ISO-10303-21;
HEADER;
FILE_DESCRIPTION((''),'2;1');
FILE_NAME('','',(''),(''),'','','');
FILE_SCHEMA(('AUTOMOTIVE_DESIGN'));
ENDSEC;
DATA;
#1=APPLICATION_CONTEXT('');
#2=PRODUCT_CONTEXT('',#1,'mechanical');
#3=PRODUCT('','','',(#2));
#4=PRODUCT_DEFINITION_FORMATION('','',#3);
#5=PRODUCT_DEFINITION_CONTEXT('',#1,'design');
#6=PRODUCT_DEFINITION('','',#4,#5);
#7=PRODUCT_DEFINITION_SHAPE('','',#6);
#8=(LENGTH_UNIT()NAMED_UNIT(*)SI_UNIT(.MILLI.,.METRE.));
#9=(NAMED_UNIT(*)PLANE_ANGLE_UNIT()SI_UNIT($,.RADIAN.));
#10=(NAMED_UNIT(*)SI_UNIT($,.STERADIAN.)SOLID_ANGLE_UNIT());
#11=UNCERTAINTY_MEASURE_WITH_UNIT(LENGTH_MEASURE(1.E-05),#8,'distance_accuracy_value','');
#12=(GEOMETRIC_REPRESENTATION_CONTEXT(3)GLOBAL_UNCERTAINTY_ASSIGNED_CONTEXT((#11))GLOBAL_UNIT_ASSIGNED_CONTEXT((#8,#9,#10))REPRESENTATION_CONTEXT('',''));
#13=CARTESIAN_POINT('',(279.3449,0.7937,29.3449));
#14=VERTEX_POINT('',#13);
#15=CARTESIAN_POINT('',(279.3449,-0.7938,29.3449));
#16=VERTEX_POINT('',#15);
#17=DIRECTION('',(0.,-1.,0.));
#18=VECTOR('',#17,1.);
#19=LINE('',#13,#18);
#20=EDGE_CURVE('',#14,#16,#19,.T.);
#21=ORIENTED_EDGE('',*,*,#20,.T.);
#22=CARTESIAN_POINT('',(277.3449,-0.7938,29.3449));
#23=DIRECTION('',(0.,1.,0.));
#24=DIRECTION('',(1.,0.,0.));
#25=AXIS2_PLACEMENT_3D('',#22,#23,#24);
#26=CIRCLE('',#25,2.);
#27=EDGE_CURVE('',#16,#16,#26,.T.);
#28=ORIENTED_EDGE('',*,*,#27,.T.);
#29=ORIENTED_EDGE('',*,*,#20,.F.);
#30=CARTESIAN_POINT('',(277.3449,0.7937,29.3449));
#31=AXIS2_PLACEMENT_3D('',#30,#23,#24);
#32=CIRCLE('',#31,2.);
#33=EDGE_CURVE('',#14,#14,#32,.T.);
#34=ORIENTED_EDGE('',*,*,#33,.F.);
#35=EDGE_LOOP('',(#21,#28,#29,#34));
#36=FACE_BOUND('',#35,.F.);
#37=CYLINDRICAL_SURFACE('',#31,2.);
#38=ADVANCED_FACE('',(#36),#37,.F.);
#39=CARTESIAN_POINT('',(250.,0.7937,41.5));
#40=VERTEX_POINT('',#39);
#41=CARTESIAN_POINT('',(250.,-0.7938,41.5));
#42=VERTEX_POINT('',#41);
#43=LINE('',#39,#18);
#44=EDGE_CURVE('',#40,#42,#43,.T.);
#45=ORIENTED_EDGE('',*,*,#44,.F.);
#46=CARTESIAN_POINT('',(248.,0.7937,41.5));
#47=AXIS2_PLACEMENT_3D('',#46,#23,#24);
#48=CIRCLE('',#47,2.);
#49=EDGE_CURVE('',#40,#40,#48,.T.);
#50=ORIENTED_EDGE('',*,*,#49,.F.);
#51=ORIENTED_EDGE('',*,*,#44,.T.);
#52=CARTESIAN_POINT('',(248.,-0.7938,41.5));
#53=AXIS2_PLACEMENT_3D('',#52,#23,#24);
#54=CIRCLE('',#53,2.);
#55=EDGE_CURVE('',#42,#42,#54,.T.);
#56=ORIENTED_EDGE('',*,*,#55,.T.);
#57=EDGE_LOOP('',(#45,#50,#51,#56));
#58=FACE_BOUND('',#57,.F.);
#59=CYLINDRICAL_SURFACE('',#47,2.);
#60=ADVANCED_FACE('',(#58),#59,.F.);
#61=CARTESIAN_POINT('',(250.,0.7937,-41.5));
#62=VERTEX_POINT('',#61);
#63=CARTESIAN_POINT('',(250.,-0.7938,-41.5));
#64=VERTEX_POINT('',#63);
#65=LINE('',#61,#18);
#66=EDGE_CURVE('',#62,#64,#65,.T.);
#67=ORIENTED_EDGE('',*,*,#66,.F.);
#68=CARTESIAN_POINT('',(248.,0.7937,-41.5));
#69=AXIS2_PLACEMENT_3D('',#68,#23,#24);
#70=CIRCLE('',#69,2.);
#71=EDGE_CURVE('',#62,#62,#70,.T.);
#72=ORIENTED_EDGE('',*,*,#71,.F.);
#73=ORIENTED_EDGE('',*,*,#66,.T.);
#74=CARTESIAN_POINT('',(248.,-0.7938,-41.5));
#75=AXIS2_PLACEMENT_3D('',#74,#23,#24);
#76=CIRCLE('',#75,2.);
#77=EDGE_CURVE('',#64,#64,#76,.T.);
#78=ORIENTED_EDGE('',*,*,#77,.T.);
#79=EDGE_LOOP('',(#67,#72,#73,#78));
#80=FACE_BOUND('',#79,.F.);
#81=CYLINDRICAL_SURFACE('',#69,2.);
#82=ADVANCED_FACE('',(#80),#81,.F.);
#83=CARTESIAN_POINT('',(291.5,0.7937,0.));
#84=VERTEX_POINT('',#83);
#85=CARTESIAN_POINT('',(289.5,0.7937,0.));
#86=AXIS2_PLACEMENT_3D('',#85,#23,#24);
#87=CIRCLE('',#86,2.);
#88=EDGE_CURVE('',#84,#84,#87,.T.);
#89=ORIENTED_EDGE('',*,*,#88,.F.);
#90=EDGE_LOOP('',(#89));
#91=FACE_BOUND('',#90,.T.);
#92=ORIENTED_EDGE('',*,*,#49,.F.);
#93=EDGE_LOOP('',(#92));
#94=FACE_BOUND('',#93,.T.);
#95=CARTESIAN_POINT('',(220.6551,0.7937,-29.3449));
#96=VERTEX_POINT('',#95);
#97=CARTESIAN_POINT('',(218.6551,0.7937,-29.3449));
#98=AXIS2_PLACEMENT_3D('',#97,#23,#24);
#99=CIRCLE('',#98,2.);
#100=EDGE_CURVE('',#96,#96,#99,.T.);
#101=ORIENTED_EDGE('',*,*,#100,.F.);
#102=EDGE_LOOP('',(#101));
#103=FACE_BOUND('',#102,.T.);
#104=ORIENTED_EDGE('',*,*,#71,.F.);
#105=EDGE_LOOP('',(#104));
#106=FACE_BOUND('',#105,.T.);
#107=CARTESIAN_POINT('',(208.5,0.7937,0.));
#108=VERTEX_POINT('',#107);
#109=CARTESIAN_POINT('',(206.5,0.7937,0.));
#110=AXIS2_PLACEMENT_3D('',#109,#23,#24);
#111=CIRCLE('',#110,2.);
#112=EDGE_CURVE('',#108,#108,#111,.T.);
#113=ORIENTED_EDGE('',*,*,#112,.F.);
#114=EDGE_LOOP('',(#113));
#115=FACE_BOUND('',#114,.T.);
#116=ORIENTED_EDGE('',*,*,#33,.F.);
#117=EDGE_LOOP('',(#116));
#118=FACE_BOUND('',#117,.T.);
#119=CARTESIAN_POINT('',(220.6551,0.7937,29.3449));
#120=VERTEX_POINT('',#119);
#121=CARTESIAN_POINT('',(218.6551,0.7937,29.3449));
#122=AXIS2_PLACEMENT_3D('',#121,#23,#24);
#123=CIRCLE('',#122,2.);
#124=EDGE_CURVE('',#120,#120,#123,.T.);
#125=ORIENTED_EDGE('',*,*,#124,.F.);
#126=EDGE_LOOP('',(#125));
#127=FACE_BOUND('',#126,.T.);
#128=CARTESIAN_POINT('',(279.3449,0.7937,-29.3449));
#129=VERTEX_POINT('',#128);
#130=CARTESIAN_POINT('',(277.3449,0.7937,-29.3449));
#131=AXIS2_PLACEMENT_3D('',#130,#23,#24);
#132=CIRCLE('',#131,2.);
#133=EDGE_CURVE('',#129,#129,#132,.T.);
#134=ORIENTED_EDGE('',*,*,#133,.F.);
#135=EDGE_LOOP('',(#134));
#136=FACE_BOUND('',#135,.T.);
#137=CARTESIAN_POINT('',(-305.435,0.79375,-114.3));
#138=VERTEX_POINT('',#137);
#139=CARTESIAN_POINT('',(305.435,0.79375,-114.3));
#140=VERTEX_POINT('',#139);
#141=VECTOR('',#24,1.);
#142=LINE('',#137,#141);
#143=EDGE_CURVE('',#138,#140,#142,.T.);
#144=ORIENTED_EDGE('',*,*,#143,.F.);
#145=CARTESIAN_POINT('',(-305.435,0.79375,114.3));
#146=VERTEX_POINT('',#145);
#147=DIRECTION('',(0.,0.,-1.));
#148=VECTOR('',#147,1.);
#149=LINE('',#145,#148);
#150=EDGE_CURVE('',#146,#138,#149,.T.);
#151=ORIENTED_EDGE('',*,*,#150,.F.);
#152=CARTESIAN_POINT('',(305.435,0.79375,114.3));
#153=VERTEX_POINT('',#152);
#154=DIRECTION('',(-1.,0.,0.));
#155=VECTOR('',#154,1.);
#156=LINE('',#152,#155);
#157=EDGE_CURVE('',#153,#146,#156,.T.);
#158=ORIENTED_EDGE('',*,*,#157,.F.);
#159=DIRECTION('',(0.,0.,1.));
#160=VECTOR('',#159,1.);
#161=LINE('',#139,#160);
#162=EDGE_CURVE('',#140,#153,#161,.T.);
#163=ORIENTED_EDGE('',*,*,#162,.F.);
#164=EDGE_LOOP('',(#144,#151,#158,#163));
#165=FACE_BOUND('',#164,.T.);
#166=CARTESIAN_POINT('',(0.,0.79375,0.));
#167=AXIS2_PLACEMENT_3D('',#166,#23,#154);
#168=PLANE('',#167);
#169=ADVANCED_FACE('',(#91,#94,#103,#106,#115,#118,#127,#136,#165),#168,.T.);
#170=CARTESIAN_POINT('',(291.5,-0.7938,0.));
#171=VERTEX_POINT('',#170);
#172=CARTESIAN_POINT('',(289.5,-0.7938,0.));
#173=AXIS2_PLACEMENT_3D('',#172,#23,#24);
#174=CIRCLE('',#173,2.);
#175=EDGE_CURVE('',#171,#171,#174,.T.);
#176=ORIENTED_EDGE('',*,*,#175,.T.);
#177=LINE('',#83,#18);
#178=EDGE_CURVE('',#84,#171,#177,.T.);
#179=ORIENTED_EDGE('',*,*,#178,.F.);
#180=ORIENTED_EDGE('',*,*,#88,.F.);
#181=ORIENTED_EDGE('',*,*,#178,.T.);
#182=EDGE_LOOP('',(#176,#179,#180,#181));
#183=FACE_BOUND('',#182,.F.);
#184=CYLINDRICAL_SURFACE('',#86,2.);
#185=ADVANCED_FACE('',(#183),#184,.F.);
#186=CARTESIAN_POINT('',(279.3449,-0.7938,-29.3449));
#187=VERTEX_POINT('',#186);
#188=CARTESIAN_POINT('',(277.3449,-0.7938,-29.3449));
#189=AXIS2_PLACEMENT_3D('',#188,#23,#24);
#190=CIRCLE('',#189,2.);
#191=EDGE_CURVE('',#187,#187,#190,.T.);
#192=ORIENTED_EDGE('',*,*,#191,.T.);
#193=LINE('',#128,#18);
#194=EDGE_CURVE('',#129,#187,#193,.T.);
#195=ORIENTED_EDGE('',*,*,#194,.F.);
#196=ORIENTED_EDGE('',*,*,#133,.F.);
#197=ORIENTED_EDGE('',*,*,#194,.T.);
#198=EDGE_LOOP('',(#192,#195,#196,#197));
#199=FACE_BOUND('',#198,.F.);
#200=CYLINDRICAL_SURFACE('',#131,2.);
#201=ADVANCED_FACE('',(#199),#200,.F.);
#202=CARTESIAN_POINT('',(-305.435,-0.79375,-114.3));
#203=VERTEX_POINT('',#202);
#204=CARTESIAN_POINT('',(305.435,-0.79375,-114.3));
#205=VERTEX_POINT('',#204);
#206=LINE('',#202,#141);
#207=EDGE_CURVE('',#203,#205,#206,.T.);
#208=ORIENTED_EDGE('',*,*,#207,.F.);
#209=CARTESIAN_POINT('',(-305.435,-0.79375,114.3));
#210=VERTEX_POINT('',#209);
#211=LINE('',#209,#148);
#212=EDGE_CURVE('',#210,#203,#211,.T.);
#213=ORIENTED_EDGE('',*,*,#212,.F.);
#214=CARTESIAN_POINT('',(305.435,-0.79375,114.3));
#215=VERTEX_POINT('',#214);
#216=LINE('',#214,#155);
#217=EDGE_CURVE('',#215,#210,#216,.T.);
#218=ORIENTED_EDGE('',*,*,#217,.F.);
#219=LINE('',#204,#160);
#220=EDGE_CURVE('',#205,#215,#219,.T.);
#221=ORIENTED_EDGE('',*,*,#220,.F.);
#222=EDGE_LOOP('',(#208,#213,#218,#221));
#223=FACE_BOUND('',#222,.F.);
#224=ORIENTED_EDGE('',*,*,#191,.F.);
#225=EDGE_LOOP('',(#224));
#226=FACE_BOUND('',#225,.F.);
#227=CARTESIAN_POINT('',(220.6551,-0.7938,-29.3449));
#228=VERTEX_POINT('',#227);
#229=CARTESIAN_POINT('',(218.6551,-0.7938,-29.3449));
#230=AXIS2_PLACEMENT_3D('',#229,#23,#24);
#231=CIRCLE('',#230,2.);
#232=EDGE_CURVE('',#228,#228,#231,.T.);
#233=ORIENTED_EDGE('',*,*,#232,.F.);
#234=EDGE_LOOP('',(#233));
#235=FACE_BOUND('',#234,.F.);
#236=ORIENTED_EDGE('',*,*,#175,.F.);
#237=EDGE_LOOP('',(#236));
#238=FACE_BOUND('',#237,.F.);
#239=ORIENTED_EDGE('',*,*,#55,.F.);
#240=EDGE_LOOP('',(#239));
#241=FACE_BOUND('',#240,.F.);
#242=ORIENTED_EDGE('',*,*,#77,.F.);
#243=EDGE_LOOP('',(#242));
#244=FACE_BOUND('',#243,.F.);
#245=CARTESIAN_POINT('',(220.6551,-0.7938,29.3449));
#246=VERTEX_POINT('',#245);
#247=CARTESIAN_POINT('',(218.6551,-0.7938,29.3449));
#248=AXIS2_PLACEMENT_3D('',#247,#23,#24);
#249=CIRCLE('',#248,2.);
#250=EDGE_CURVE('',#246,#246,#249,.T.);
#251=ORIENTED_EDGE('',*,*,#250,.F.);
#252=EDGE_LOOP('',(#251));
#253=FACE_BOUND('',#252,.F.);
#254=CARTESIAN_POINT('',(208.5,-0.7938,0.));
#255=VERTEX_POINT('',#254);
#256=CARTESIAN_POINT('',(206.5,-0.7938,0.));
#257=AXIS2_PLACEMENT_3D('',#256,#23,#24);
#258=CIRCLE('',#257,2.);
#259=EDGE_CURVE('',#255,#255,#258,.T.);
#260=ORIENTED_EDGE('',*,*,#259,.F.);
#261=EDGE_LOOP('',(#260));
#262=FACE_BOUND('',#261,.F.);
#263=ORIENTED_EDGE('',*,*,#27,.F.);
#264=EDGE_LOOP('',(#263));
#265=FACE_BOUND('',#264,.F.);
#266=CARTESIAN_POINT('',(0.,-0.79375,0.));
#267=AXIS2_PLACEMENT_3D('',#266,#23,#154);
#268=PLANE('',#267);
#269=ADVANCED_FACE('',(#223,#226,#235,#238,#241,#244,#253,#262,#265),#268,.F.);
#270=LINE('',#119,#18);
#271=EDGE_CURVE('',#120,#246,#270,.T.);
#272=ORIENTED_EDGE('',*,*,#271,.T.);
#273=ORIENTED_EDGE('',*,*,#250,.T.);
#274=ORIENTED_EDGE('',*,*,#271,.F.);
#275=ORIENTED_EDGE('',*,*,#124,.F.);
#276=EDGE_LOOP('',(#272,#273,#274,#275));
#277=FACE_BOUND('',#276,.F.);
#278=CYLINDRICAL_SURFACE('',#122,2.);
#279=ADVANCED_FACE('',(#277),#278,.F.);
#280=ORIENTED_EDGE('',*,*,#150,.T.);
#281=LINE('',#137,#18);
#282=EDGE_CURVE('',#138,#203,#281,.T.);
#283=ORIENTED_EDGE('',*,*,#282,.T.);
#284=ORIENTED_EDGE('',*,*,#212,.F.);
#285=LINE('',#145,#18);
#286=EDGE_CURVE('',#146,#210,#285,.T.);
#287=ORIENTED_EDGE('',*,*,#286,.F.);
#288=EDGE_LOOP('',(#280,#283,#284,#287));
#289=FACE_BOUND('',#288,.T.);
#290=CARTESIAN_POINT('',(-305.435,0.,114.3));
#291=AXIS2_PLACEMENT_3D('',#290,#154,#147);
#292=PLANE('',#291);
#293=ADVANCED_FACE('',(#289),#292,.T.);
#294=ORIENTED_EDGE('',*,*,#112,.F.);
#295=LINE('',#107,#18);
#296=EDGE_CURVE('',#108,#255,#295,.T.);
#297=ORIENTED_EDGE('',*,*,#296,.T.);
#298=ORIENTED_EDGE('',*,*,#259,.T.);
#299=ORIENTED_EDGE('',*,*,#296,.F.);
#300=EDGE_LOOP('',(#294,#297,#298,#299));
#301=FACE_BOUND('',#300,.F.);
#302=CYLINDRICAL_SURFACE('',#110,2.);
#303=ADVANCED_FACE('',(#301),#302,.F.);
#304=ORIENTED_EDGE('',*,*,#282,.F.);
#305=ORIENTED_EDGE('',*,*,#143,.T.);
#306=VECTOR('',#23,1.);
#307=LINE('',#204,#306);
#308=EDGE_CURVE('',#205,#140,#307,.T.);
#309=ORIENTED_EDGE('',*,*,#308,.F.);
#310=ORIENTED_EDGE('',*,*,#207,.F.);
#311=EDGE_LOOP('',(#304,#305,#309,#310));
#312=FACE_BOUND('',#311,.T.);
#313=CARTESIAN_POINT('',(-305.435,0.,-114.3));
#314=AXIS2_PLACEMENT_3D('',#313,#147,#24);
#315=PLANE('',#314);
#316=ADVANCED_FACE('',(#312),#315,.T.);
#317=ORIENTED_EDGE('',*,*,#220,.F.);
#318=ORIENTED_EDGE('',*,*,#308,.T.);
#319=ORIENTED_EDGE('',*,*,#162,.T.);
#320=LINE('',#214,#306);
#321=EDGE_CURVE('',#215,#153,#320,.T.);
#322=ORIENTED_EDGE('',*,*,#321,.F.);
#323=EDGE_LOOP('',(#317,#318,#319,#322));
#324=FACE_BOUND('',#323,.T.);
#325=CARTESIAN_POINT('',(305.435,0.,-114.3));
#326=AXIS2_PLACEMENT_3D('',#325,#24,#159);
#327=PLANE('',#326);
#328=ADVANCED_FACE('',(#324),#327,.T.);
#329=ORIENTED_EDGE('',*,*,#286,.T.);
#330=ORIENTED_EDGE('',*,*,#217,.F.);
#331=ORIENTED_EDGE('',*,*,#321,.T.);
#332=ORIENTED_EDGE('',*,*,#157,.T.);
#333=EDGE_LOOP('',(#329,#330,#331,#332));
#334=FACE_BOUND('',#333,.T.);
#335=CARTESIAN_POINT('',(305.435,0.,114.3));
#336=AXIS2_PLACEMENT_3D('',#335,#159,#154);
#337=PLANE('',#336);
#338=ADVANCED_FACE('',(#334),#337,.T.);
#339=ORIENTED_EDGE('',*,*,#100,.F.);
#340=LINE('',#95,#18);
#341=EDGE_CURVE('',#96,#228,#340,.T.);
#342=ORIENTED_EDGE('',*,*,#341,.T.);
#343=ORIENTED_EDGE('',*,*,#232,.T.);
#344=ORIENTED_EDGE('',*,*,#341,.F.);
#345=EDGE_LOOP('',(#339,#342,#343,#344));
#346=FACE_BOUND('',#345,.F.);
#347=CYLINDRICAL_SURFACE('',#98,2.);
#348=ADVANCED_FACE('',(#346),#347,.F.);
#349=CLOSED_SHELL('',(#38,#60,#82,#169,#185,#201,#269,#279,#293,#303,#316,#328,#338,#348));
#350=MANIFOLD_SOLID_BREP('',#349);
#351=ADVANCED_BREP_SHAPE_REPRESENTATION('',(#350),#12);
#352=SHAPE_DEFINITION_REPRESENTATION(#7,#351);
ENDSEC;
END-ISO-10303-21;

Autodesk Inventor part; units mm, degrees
ref_plane "YZ Plane" through (0, 0, 0) normal (1, 0, 0) x (0, 1, 0)
ref_plane "XZ Plane" through (0, 0, 0) normal (0, 1, 0) x (-1, 0, 0)
ref_plane "XY Plane" through (0, 0, 0) normal (0, 0, 1) x (1, 0, 0)
sketch "Sketch1" plane through (0, 0, 0) normal (0, 1, 0) x (-1, 0, 0)
  line L0 (-305.435, 114.3) -> (305.435, 114.3)
  line L1 (305.435, 114.3) -> (305.435, -114.3)
  line L2 (305.435, -114.3) -> (-305.435, -114.3)
  line L3 (-305.435, -114.3) -> (-305.435, 114.3)
  line L4 (-305.435, 114.3) -> (305.435, -114.3) construction
  line L5 (305.435, 114.3) -> (-305.435, -114.3) construction
  point P0 (0, 0)
  dimension "d0" = 610.87
  dimension "d1" = 228.6
extrude "Extrusion1" add sketch "Sketch1" along normal mid plane 1.5875
sketch "Sketch2" plane through (0, 0.7937, 0) normal (0, 1, 0) x (1, 0, 0)
  circle A0 centre (248, 0) radius 41.5 construction
  circle A1 centre (248, 41.5) radius 2
  circle A2 centre (218.6551, 29.3449) radius 2
  circle A3 centre (206.5, 0) radius 2
  circle A4 centre (218.6551, -29.3449) radius 2
  circle A5 centre (248, -41.5) radius 2
  circle A6 centre (277.3449, -29.3449) radius 2
  circle A7 centre (289.5, 0) radius 2
  circle A8 centre (277.3449, 29.3449) radius 2
  point P0 (0, 0)
  dimension "d4" = 83
  dimension "d5" = 248
  dimension "d6" = 4
  dimension "d9" = 360
extrude "Extrusion2" cut sketch "Sketch2" against normal up to surface (1.5875 mm away)
properties part number "ChassisTop V3"
